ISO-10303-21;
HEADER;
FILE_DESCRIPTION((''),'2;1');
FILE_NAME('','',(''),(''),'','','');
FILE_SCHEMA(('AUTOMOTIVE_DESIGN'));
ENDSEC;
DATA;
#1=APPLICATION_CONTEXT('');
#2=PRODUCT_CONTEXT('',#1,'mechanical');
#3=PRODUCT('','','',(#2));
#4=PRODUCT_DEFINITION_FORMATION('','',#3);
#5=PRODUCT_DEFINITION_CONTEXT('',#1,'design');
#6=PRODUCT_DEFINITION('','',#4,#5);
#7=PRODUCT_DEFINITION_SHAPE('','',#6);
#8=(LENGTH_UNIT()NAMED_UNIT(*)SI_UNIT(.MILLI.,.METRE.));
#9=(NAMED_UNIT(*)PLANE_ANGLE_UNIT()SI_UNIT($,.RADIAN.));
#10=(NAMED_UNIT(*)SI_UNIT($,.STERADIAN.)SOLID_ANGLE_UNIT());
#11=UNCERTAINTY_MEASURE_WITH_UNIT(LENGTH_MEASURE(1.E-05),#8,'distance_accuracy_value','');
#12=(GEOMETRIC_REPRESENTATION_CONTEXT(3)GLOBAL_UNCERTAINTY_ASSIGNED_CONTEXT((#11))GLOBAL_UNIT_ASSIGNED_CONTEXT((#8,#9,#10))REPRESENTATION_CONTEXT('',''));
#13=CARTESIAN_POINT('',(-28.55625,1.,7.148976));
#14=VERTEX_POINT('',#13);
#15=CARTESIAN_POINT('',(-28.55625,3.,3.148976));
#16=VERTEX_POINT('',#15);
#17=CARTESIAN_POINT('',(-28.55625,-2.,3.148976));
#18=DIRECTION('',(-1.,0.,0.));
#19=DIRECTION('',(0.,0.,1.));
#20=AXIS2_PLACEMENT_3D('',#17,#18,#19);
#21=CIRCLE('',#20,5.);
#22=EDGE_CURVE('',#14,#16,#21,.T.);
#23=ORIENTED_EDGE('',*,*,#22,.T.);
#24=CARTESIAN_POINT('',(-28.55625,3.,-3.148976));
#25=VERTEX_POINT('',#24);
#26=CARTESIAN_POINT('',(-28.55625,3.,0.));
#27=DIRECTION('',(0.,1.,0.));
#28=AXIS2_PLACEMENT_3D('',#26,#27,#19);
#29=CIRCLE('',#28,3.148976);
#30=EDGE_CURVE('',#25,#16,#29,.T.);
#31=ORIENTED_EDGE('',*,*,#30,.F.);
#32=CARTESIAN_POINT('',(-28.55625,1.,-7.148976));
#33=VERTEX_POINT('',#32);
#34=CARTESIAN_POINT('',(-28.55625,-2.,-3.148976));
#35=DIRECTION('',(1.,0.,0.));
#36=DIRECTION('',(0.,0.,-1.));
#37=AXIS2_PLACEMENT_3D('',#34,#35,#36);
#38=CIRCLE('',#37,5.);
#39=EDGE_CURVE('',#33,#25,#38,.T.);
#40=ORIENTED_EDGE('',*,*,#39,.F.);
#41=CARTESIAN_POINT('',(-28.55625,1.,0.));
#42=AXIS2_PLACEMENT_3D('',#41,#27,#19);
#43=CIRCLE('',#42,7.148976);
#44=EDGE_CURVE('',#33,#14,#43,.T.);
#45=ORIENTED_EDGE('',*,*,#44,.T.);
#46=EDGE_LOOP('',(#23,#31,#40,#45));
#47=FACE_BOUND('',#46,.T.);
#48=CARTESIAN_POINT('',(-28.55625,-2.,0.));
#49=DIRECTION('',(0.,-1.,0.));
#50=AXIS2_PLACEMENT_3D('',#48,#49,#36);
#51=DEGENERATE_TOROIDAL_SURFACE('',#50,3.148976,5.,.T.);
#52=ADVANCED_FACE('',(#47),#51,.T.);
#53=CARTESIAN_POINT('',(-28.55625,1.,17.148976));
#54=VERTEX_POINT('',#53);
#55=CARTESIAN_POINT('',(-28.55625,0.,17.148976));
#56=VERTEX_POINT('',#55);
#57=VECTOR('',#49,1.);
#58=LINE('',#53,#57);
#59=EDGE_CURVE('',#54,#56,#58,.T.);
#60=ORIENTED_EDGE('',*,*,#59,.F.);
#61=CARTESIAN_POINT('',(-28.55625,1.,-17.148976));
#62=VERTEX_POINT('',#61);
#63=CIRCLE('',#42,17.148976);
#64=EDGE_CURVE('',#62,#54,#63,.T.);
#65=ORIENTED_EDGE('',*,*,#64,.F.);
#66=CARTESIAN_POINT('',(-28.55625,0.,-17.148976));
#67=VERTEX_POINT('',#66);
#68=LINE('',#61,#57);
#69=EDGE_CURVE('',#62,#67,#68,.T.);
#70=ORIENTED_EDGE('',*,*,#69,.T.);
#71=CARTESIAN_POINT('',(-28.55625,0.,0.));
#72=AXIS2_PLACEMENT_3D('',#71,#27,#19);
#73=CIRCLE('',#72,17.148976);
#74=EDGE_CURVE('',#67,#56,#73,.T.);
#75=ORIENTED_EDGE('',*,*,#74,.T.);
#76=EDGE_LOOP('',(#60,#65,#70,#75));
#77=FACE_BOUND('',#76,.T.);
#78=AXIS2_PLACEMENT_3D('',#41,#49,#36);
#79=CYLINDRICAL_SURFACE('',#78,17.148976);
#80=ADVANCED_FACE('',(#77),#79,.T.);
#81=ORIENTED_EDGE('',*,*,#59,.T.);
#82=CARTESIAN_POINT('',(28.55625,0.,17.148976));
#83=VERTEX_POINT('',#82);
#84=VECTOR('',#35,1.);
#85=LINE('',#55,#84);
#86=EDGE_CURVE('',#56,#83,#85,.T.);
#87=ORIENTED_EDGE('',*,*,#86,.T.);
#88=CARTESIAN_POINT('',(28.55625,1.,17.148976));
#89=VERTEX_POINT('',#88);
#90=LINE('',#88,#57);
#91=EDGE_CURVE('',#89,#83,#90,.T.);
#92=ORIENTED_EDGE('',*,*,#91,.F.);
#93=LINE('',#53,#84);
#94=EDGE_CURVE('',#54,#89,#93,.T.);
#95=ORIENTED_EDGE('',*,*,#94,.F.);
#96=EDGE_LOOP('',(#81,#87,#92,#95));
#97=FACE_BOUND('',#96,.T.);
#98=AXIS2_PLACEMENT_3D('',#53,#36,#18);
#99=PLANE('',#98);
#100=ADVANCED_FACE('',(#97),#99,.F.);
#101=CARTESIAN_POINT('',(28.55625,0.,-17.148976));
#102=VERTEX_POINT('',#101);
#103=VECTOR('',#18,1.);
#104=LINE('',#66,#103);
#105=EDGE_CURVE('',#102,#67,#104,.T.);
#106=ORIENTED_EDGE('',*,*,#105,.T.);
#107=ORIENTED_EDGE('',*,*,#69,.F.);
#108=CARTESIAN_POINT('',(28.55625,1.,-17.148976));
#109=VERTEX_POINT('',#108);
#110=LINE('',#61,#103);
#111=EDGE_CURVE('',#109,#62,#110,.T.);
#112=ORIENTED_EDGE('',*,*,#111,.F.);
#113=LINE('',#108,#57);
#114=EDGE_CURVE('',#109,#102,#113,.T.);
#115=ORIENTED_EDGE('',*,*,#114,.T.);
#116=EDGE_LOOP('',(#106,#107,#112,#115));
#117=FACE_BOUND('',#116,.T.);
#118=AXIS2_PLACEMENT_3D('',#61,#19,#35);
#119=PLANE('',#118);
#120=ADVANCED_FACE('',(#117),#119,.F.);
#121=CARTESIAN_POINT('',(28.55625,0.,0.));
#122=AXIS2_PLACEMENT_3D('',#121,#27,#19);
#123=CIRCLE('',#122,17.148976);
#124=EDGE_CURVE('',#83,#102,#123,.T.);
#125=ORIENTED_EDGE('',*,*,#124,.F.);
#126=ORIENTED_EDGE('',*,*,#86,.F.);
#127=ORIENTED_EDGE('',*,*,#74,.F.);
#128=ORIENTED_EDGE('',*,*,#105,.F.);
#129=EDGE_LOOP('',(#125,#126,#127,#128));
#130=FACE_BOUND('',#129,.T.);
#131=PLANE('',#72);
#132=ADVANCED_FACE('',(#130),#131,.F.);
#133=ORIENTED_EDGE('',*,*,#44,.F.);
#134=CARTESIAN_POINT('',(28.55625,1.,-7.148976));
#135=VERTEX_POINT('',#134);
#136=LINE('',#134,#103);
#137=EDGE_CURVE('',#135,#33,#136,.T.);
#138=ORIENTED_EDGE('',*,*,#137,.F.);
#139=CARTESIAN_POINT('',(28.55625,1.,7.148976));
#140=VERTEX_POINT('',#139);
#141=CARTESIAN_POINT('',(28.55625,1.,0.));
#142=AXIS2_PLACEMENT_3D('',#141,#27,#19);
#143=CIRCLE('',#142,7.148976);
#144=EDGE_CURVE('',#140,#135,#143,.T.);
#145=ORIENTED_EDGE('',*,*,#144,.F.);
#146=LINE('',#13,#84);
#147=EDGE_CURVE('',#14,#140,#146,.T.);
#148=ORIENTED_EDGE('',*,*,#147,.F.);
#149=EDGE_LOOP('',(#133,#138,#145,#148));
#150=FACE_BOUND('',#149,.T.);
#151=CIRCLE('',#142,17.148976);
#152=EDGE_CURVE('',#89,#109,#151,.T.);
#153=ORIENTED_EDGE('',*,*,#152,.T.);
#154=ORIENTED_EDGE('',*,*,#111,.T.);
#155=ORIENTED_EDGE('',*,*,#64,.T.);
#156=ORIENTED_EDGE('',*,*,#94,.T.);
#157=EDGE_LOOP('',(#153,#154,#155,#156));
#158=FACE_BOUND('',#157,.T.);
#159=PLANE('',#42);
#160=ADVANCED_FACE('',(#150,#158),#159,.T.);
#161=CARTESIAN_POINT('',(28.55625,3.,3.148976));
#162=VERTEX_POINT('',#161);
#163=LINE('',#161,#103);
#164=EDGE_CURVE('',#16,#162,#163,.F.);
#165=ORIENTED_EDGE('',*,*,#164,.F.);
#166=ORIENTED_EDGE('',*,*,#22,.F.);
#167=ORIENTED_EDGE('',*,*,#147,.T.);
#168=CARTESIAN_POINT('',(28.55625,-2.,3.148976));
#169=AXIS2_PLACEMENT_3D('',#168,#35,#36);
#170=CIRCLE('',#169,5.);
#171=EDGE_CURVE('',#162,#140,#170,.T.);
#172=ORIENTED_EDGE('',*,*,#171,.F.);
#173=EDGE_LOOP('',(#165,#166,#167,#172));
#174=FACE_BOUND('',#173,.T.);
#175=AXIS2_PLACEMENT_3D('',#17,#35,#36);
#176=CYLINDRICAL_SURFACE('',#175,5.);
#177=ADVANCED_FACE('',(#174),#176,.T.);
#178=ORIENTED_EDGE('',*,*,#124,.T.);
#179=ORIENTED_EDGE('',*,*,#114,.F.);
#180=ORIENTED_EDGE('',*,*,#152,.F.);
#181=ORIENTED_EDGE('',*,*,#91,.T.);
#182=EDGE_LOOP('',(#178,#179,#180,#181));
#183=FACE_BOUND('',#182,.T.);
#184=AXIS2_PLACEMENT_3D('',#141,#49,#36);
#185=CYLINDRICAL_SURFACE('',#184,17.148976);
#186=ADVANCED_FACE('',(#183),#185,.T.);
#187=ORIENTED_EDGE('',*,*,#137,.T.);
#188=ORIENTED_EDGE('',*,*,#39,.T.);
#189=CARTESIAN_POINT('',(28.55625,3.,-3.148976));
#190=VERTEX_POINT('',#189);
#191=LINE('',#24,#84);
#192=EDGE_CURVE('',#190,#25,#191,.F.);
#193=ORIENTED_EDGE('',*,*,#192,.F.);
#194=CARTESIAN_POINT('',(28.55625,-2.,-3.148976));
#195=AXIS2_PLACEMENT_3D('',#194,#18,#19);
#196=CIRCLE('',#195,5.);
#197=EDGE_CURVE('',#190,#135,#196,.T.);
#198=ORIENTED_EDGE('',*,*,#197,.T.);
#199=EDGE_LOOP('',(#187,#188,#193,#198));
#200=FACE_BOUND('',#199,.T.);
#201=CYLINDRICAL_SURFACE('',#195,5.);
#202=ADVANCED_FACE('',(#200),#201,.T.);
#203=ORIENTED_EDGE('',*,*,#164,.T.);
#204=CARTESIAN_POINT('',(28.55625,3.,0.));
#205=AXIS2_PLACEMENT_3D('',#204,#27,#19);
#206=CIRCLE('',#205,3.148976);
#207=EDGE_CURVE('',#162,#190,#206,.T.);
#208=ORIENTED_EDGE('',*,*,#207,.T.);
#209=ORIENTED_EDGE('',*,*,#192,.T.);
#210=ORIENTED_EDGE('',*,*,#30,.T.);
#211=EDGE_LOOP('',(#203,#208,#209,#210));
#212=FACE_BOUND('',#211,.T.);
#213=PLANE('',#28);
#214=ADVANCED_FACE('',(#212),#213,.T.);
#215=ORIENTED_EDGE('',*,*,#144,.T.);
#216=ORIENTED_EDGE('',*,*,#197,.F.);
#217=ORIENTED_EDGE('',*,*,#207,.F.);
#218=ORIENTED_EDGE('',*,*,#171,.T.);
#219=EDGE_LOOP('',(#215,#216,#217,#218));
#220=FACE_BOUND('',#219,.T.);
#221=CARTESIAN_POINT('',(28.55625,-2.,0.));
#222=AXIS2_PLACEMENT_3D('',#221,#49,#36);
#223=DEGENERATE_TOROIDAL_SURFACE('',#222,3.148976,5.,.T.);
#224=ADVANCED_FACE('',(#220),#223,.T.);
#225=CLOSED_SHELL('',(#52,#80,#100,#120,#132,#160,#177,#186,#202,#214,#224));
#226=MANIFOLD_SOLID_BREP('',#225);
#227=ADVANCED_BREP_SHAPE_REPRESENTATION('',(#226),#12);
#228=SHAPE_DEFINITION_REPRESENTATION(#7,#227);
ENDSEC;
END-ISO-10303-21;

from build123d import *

# Parameters (mm, degrees)
BOSS_EXTRUDE1_DEPTH = 1
BOSS_EXTRUDE2_DEPTH = 2
FILLET1_R           = 5


with BuildPart() as part:
    # Sketch1 → Boss-Extrude1 (new body)
    with BuildSketch(Plane(origin=(0, 0, 0), x_dir=(1, 0, 0), z_dir=(0, 1, 0))):
        with BuildLine():
            Line((-28.55625, 17.14897587), (28.55625, 17.14897587))
            ThreePointArc((28.55625, 17.14897587), (45.70522587, 0), (28.55625, -17.14897587))
            Line((28.55625, -17.14897587), (-28.55625, -17.14897587))
            ThreePointArc((-28.55625, -17.14897587), (-45.70522587, 0), (-28.55625, 17.14897587))
        make_face()
    extrude(amount=BOSS_EXTRUDE1_DEPTH)

    # Sketch2 → Boss-Extrude2 (add)
    with BuildSketch(Plane(origin=(0, 1, 0), x_dir=(1, 0, 0), z_dir=(0, 1, 0))):
        with BuildLine():
            Line((-28.55625, -7.14897587), (28.55625, -7.14897587))
            ThreePointArc((28.55625, -7.14897587), (35.70522587, 0), (28.55625, 7.14897587))
            Line((28.55625, 7.14897587), (-28.55625, 7.14897587))
            ThreePointArc((-28.55625, 7.14897587), (-35.70522587, 0), (-28.55625, -7.14897587))
        make_face()
    extrude(amount=BOSS_EXTRUDE2_DEPTH)

    # Fillet1
    # the kernel refuses this fillet: 5 mm, written as the material it takes off along each edge
    with BuildSketch(Plane(origin=(28.55625, 3, -7.14897587), x_dir=(0, -1, 0), z_dir=(-1, 0, 0)), Plane(origin=(-28.55625, 3, 7.14897587), x_dir=(0, -1, 0), z_dir=(1, 0, 0))) as fillet1_piece_1:
        with BuildLine():
            CenterArc((5, 4), FILLET1_R, 180, 53.130102354)
            Line((0, 4), (-0.1, 4))
            Line((-0.1, 4), (-0.1, 0))
            Line((-0.1, 0), (0, -0.1))
            ThreePointArc((0, -0.1), (1, -0.1), (1.94, -0.08))
            Line((1.94, -0.08), (2, 0))
        make_face()
    extrude(amount=57.1125, mode=Mode.SUBTRACT)
    with BuildSketch(Plane(origin=(28.55625, 3, 0), x_dir=(0, 0, 1), z_dir=(-1, 0, 0))) as fillet1_piece_2:
        with BuildLine():
            CenterArc((3.14897587, -5), FILLET1_R, 36.869897646, 53.130102354)
            Line((3.14897587, 0), (3.14897587, 0.1))
            Line((3.14897587, 0.1), (7.14897587, 0.1))
            Line((7.14897587, 0.1), (7.24897587, 0))
            ThreePointArc((7.24897587, 0), (7.24897587, -1), (7.22897587, -1.94))
            Line((7.22897587, -1.94), (7.14897587, -2))
        make_face()
    revolve(axis=Axis((28.55625, 3, 0), (0, 1, 0)), revolution_arc=180, mode=Mode.SUBTRACT)
    with BuildSketch(Plane(origin=(-28.55625, 3, 0), x_dir=(0, 0, -1), z_dir=(1, 0, 0))) as fillet1_piece_3:
        with BuildLine():
            CenterArc((3.14897587, -5), FILLET1_R, 36.869897646, 53.130102354)
            Line((3.14897587, 0), (3.14897587, 0.1))
            Line((3.14897587, 0.1), (7.14897587, 0.1))
            Line((7.14897587, 0.1), (7.24897587, 0))
            ThreePointArc((7.24897587, 0), (7.24897587, -1), (7.22897587, -1.94))
            Line((7.22897587, -1.94), (7.14897587, -2))
        make_face()
    revolve(axis=Axis((-28.55625, 3, 0), (0, 1, 0)), revolution_arc=180, mode=Mode.SUBTRACT)


solid = part.part
